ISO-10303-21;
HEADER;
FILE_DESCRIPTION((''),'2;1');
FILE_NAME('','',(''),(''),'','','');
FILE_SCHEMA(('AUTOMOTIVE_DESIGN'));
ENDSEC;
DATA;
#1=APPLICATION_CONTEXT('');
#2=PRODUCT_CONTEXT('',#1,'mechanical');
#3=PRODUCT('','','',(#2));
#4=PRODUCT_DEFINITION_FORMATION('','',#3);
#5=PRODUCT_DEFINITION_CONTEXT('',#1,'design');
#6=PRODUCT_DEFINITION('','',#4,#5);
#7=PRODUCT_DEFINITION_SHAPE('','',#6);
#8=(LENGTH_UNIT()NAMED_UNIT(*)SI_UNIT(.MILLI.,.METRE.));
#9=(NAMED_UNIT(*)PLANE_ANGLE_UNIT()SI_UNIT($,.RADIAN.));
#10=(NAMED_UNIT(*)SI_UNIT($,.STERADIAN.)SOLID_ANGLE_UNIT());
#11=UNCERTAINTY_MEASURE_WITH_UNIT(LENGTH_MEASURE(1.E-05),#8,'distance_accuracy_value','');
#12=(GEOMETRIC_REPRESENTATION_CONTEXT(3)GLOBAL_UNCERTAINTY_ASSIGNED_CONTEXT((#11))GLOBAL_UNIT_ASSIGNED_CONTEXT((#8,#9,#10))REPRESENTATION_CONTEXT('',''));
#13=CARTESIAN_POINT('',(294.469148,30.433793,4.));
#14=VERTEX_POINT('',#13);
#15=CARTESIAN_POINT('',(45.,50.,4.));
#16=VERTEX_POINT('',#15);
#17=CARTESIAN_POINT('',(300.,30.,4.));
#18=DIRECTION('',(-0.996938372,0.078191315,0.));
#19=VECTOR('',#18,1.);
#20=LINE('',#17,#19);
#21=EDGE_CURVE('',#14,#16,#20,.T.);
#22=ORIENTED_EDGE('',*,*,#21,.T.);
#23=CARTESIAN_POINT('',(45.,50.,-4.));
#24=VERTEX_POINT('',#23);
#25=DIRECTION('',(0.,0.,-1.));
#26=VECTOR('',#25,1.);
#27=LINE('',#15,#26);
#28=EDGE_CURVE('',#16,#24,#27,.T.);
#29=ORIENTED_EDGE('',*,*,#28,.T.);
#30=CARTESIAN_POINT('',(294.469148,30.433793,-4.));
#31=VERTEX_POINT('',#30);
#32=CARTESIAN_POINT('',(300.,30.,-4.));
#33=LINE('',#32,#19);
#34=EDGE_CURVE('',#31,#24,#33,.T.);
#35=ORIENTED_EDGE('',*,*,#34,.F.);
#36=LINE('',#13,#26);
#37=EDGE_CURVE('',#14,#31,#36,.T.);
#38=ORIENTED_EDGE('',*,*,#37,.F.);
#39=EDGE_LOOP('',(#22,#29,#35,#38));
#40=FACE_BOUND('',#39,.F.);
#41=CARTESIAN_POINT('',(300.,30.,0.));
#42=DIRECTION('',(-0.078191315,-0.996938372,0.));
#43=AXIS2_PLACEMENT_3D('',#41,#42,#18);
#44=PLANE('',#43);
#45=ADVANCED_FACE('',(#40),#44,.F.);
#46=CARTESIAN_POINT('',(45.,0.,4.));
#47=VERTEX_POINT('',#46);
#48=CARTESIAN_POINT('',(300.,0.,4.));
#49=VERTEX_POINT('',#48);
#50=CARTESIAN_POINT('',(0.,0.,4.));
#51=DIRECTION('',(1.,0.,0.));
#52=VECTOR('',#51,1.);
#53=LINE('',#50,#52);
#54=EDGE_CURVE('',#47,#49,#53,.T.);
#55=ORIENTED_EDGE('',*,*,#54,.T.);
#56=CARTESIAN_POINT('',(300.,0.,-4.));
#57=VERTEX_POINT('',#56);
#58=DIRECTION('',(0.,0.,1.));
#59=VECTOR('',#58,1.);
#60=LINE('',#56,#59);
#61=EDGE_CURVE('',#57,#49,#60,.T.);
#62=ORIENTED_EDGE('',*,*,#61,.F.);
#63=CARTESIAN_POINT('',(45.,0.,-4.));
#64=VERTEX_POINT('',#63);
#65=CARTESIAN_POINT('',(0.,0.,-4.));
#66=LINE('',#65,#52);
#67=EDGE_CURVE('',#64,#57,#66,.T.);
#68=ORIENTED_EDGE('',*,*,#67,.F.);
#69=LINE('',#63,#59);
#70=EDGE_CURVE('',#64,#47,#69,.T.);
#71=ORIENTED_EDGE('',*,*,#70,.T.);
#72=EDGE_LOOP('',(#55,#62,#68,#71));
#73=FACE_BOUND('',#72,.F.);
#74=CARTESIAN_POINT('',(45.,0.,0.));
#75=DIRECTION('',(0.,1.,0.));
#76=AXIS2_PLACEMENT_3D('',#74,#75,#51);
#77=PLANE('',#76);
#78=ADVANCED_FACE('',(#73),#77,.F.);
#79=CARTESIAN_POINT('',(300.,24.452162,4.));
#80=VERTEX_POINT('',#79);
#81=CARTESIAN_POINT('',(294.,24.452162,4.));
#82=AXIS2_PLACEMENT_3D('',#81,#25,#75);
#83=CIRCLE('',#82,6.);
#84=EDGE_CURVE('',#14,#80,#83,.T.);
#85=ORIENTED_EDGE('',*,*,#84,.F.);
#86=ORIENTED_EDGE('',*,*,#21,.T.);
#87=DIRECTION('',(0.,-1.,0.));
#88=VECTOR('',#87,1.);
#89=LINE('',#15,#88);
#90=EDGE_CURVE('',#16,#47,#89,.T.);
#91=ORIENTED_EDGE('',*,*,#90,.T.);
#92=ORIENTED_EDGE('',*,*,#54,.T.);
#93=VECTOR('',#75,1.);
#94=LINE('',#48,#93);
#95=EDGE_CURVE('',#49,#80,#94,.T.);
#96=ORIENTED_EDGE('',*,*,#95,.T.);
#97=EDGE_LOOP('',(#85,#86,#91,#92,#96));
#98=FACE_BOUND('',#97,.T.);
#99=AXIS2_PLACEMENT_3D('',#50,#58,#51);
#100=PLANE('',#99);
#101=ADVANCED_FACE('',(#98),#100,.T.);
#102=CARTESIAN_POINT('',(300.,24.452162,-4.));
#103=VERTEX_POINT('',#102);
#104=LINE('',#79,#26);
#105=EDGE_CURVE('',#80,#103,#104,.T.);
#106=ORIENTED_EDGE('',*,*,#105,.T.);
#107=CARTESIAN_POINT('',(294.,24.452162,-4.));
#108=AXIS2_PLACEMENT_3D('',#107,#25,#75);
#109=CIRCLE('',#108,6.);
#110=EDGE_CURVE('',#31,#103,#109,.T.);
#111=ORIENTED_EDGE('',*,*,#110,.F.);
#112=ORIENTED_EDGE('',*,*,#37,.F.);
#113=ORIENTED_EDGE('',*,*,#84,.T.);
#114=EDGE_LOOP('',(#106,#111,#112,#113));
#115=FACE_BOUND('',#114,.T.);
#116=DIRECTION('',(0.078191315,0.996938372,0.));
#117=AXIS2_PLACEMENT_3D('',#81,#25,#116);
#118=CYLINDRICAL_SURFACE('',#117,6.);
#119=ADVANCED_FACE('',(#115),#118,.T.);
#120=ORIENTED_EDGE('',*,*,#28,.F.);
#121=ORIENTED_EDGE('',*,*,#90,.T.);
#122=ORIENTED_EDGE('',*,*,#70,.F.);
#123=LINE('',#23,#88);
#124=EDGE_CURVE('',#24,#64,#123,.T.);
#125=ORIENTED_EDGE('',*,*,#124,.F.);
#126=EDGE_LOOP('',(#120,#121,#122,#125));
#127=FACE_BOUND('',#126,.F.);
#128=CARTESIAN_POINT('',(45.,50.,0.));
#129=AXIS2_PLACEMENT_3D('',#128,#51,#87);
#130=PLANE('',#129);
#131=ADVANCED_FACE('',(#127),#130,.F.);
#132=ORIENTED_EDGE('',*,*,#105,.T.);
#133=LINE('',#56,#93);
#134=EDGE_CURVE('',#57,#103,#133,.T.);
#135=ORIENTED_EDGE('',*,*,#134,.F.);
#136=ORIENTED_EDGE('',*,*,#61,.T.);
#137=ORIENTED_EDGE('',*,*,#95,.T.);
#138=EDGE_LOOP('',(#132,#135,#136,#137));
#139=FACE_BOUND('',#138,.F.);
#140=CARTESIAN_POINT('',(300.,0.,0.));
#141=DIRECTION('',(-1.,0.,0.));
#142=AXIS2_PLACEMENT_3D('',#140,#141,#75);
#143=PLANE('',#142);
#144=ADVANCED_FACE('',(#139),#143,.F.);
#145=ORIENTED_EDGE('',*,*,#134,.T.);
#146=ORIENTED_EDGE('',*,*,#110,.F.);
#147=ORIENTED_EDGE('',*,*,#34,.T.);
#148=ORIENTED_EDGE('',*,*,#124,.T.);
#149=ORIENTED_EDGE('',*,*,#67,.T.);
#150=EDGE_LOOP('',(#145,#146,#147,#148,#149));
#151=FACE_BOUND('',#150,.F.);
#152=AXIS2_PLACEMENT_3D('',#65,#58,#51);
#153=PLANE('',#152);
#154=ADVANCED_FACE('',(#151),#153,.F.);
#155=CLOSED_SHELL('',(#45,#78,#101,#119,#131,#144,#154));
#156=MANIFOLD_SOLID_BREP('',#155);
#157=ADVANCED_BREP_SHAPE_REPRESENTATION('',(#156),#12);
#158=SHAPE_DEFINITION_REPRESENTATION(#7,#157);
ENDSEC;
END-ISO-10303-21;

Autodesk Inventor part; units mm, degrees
ref_plane "YZ Plane" through (0, 0, 0) normal (1, 0, 0) x (0, 1, 0)
ref_plane "XZ Plane" through (0, 0, 0) normal (0, 1, 0) x (-1, 0, 0)
ref_plane "XY Plane" through (0, 0, 0) normal (0, 0, 1) x (1, 0, 0)
sketch "Sketch3" plane through (0, 0, 0) normal (0, 0, 1) x (1, 0, 0)
  line L0 (0, 0) -> (300, 0)
  line L1 (300, 0) -> (300, 30)
  line L2 (300, 30) -> (-5.542, 53.9641)
  line L3 (45, 50) -> (45, 0)
  dimension "d11" = 300
  dimension "d12" = 30
  dimension "d13" = 45
  dimension "d14" = 50
extrude "Plate1" add sketch "Sketch3" along normal mid plane 8
fillet "Corner Round1" radius 6 1 edges at (300, 30, 0)
equation "\"d15\" = Thickness"
equation "\"BendRadius\" = Thickness"
equation "\"BendReliefWidth\" = Thickness"
equation "\"BendReliefDepth\" = 0.5 * Thickness"
equation "\"CornerReliefSize\" = 4 * Thickness"
equation "\"MinimumRemnant\" = 2 * Thickness"
equation "\"TransitionRadius\" = BendRadius"
equation "\"JacobiRadiusSize\" = BendRadius"
equation "\"GapSize\" = Thickness"
equation "\"Thickness\" = 8"
properties part number "PNS 1713 charging hatch reinf 500mm" material "Steel"
